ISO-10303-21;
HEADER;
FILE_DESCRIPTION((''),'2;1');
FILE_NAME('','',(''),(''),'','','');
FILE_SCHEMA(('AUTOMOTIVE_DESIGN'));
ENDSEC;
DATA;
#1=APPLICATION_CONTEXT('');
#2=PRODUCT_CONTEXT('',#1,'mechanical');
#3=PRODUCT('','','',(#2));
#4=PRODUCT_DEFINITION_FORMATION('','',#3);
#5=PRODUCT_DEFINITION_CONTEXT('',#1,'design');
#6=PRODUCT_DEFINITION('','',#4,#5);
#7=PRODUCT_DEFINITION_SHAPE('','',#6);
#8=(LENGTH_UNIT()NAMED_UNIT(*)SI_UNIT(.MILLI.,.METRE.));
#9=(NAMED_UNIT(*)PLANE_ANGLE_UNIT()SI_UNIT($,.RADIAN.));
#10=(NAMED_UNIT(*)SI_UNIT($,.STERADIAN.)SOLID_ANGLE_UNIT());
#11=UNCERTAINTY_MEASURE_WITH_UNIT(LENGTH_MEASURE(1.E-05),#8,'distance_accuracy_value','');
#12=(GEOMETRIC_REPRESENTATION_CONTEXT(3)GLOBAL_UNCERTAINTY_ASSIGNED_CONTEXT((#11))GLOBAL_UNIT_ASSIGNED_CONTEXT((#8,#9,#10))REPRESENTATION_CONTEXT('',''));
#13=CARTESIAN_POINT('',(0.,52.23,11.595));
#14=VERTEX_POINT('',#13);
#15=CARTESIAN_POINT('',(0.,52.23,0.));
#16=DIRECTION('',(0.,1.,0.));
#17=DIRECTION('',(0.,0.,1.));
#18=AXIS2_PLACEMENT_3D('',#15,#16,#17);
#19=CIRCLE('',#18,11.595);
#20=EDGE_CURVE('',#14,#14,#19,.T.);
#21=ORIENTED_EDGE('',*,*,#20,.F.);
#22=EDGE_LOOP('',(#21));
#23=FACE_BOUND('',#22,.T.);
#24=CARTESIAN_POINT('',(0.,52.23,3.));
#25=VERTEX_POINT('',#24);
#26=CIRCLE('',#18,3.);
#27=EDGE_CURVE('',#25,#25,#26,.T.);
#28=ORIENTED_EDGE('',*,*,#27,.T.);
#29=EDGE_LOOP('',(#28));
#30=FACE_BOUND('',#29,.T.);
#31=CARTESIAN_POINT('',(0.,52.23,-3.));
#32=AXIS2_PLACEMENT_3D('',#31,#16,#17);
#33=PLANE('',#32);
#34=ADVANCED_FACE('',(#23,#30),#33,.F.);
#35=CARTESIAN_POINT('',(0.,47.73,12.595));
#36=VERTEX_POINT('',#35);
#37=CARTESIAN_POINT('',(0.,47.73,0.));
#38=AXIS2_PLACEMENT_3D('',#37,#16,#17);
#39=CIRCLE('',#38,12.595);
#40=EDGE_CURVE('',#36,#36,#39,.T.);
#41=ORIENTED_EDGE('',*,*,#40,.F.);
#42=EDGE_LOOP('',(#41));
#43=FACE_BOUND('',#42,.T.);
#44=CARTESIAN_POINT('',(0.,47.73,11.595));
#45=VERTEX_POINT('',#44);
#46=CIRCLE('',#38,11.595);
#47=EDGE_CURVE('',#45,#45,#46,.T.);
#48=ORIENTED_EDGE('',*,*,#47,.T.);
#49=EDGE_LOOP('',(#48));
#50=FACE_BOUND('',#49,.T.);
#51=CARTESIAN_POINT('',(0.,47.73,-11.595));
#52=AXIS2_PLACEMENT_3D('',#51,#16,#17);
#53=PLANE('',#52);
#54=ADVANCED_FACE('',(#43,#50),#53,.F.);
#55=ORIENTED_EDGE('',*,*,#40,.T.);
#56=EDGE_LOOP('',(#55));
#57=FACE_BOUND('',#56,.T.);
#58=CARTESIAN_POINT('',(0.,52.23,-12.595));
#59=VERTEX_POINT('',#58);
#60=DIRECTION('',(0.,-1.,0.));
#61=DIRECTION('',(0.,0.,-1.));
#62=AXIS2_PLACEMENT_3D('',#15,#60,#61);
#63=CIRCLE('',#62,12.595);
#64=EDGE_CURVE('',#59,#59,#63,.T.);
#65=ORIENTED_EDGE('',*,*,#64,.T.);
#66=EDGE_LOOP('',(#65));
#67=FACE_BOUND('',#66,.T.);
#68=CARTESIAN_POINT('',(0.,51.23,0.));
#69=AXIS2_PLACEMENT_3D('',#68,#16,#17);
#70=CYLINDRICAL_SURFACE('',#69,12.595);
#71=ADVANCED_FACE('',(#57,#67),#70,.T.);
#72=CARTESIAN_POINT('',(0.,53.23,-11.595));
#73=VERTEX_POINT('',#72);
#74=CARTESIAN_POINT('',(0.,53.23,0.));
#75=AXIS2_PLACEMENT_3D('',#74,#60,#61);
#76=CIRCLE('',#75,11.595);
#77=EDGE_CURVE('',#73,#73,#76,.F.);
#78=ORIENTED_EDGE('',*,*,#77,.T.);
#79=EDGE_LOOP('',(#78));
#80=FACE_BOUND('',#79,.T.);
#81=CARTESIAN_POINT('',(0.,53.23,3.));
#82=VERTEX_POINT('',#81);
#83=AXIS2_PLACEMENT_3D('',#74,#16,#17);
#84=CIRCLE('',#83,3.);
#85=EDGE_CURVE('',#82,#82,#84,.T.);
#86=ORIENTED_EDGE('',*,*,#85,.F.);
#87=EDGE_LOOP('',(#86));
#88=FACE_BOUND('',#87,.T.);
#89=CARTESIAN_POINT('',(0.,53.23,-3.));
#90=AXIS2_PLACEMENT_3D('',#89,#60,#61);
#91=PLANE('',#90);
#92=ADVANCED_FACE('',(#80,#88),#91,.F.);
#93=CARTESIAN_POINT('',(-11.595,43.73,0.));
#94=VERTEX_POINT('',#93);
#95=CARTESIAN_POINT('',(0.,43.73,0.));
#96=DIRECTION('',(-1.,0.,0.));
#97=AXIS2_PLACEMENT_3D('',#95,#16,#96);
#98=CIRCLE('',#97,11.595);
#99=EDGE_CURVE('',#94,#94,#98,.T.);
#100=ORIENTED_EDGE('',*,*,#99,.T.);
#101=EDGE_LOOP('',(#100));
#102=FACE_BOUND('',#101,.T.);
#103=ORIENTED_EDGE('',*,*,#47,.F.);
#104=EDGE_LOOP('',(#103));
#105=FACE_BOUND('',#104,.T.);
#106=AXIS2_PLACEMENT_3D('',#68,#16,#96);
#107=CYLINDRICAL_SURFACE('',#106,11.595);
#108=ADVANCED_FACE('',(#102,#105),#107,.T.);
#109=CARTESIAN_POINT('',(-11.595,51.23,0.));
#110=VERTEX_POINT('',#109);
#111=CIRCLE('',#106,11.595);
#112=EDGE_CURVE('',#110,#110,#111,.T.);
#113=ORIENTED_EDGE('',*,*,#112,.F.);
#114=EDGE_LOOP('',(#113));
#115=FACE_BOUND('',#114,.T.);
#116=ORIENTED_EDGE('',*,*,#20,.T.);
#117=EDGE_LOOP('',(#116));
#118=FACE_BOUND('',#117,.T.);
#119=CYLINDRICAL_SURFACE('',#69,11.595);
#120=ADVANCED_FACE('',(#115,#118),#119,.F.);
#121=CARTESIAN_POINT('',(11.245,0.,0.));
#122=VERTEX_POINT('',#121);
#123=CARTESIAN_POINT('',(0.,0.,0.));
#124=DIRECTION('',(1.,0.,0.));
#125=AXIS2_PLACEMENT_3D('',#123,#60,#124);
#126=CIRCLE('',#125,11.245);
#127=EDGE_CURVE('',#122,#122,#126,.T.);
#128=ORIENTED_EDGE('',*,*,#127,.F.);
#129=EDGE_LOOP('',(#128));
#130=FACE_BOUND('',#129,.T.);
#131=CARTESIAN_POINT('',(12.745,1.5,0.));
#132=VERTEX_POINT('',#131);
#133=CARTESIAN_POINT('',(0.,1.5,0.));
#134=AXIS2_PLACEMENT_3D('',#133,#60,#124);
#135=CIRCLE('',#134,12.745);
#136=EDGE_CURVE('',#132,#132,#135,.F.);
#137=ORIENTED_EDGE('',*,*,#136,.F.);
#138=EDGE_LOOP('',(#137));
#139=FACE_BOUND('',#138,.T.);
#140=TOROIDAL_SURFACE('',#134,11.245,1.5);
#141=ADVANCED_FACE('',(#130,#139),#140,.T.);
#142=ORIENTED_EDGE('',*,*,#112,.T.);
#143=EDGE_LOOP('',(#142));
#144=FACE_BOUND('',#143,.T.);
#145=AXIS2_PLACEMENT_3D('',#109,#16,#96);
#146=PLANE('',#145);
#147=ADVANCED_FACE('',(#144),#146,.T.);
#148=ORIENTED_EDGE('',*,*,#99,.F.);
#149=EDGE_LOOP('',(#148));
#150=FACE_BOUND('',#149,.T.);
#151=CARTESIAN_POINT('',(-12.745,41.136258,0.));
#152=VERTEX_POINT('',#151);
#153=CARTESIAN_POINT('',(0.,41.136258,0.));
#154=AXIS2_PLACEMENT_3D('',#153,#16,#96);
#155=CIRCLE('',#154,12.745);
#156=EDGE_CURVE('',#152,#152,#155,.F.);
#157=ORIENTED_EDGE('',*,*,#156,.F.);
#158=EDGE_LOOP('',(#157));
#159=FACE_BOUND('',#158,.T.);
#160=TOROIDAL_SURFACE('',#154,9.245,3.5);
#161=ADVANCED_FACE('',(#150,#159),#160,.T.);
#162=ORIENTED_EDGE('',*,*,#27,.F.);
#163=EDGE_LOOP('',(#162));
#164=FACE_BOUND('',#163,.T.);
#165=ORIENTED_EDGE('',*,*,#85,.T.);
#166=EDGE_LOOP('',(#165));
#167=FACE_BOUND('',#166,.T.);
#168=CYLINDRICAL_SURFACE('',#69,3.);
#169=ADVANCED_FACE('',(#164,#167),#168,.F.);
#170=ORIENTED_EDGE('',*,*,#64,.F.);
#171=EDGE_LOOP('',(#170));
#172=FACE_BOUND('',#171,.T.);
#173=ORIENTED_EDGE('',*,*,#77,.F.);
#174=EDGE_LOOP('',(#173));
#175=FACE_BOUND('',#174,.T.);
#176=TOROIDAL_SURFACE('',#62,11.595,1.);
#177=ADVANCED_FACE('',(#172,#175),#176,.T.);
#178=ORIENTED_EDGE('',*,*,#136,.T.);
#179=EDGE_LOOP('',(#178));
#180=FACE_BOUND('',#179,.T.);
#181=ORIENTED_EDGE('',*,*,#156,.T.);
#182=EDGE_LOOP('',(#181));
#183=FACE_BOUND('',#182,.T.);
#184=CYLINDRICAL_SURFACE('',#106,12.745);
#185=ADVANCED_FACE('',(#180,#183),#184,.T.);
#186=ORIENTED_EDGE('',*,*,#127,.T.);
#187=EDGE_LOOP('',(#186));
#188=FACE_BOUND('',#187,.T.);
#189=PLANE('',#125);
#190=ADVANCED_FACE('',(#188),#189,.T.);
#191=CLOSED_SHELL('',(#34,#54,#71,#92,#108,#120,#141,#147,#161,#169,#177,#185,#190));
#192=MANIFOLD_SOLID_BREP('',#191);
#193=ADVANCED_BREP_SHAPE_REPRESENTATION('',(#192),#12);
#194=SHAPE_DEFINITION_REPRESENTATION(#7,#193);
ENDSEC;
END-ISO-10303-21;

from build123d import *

# Parameters (mm, degrees)
FILLET1_R = 3.5
FILLET2_R = 1.5
FILLET3_R = 1


with BuildPart() as part:
    # Sketch1 → Revolve1 (revolve)
    with BuildSketch(Plane.XY):
        Polygon((0, 0), (-12.745, 0), (-12.745, 43.73), (-11.595, 43.73), (-11.595, 51.23), (0, 51.23), align=None)
    revolve(axis=Axis((0, 51.23, 0), (0, -1, 0)))

    # Fillet1
    # the kernel refuses this fillet: 3.5 mm, written as the material it takes off along each edge
    with BuildSketch(Plane(origin=(0, 43.73, 0), x_dir=(-1, 0, 0), z_dir=(0, 0, 1))) as fillet1_piece_1:
        with BuildLine():
            CenterArc((9.245, 2.59374247), FILLET1_R, 312.177418601, 47.822581399)
            Line((11.595, 0), (11.642, -0.051874849))
            ThreePointArc((11.642, -0.051874849), (12.17, -0.07), (12.745, -0.07))
            Line((12.745, -0.07), (12.815, 0))
            Line((12.815, 0), (12.815, 2.59374247))
            Line((12.815, 2.59374247), (12.745, 2.59374247))
        make_face()
    revolve(axis=Axis((0, 43.73, 0), (0, -1, 0)), mode=Mode.SUBTRACT)

    # Fillet2
    fillet2_edges = [part.edges().sort_by_distance(p)[0] for p in [
        (12.745, 0, 0),
    ]]
    fillet(fillet2_edges, radius=FILLET2_R)

    # Sketch2 → Revolve2 (revolve)
    with BuildSketch(Plane(origin=(0, 0, 0), x_dir=(0, 0, -1), z_dir=(1, 0, 0)), mode=Mode.PRIVATE) as revolve2_sk:
        Polygon((3, 52.23), (11.595, 52.23), (11.595, 47.73), (12.595, 47.73), (12.595, 53.23), (3, 53.23), align=None)
    revolve(revolve2_sk.sketch.rotate(Axis((0, 51.23, 0), (0, -1, 0)), 180), axis=Axis((0, 51.23, 0), (0, -1, 0)))

    # Fillet3
    fillet3_edges = [part.edges().sort_by_distance(p)[0] for p in [
        (0, 53.23, -12.595),
    ]]
    fillet(fillet3_edges, radius=FILLET3_R)


solid = part.part
